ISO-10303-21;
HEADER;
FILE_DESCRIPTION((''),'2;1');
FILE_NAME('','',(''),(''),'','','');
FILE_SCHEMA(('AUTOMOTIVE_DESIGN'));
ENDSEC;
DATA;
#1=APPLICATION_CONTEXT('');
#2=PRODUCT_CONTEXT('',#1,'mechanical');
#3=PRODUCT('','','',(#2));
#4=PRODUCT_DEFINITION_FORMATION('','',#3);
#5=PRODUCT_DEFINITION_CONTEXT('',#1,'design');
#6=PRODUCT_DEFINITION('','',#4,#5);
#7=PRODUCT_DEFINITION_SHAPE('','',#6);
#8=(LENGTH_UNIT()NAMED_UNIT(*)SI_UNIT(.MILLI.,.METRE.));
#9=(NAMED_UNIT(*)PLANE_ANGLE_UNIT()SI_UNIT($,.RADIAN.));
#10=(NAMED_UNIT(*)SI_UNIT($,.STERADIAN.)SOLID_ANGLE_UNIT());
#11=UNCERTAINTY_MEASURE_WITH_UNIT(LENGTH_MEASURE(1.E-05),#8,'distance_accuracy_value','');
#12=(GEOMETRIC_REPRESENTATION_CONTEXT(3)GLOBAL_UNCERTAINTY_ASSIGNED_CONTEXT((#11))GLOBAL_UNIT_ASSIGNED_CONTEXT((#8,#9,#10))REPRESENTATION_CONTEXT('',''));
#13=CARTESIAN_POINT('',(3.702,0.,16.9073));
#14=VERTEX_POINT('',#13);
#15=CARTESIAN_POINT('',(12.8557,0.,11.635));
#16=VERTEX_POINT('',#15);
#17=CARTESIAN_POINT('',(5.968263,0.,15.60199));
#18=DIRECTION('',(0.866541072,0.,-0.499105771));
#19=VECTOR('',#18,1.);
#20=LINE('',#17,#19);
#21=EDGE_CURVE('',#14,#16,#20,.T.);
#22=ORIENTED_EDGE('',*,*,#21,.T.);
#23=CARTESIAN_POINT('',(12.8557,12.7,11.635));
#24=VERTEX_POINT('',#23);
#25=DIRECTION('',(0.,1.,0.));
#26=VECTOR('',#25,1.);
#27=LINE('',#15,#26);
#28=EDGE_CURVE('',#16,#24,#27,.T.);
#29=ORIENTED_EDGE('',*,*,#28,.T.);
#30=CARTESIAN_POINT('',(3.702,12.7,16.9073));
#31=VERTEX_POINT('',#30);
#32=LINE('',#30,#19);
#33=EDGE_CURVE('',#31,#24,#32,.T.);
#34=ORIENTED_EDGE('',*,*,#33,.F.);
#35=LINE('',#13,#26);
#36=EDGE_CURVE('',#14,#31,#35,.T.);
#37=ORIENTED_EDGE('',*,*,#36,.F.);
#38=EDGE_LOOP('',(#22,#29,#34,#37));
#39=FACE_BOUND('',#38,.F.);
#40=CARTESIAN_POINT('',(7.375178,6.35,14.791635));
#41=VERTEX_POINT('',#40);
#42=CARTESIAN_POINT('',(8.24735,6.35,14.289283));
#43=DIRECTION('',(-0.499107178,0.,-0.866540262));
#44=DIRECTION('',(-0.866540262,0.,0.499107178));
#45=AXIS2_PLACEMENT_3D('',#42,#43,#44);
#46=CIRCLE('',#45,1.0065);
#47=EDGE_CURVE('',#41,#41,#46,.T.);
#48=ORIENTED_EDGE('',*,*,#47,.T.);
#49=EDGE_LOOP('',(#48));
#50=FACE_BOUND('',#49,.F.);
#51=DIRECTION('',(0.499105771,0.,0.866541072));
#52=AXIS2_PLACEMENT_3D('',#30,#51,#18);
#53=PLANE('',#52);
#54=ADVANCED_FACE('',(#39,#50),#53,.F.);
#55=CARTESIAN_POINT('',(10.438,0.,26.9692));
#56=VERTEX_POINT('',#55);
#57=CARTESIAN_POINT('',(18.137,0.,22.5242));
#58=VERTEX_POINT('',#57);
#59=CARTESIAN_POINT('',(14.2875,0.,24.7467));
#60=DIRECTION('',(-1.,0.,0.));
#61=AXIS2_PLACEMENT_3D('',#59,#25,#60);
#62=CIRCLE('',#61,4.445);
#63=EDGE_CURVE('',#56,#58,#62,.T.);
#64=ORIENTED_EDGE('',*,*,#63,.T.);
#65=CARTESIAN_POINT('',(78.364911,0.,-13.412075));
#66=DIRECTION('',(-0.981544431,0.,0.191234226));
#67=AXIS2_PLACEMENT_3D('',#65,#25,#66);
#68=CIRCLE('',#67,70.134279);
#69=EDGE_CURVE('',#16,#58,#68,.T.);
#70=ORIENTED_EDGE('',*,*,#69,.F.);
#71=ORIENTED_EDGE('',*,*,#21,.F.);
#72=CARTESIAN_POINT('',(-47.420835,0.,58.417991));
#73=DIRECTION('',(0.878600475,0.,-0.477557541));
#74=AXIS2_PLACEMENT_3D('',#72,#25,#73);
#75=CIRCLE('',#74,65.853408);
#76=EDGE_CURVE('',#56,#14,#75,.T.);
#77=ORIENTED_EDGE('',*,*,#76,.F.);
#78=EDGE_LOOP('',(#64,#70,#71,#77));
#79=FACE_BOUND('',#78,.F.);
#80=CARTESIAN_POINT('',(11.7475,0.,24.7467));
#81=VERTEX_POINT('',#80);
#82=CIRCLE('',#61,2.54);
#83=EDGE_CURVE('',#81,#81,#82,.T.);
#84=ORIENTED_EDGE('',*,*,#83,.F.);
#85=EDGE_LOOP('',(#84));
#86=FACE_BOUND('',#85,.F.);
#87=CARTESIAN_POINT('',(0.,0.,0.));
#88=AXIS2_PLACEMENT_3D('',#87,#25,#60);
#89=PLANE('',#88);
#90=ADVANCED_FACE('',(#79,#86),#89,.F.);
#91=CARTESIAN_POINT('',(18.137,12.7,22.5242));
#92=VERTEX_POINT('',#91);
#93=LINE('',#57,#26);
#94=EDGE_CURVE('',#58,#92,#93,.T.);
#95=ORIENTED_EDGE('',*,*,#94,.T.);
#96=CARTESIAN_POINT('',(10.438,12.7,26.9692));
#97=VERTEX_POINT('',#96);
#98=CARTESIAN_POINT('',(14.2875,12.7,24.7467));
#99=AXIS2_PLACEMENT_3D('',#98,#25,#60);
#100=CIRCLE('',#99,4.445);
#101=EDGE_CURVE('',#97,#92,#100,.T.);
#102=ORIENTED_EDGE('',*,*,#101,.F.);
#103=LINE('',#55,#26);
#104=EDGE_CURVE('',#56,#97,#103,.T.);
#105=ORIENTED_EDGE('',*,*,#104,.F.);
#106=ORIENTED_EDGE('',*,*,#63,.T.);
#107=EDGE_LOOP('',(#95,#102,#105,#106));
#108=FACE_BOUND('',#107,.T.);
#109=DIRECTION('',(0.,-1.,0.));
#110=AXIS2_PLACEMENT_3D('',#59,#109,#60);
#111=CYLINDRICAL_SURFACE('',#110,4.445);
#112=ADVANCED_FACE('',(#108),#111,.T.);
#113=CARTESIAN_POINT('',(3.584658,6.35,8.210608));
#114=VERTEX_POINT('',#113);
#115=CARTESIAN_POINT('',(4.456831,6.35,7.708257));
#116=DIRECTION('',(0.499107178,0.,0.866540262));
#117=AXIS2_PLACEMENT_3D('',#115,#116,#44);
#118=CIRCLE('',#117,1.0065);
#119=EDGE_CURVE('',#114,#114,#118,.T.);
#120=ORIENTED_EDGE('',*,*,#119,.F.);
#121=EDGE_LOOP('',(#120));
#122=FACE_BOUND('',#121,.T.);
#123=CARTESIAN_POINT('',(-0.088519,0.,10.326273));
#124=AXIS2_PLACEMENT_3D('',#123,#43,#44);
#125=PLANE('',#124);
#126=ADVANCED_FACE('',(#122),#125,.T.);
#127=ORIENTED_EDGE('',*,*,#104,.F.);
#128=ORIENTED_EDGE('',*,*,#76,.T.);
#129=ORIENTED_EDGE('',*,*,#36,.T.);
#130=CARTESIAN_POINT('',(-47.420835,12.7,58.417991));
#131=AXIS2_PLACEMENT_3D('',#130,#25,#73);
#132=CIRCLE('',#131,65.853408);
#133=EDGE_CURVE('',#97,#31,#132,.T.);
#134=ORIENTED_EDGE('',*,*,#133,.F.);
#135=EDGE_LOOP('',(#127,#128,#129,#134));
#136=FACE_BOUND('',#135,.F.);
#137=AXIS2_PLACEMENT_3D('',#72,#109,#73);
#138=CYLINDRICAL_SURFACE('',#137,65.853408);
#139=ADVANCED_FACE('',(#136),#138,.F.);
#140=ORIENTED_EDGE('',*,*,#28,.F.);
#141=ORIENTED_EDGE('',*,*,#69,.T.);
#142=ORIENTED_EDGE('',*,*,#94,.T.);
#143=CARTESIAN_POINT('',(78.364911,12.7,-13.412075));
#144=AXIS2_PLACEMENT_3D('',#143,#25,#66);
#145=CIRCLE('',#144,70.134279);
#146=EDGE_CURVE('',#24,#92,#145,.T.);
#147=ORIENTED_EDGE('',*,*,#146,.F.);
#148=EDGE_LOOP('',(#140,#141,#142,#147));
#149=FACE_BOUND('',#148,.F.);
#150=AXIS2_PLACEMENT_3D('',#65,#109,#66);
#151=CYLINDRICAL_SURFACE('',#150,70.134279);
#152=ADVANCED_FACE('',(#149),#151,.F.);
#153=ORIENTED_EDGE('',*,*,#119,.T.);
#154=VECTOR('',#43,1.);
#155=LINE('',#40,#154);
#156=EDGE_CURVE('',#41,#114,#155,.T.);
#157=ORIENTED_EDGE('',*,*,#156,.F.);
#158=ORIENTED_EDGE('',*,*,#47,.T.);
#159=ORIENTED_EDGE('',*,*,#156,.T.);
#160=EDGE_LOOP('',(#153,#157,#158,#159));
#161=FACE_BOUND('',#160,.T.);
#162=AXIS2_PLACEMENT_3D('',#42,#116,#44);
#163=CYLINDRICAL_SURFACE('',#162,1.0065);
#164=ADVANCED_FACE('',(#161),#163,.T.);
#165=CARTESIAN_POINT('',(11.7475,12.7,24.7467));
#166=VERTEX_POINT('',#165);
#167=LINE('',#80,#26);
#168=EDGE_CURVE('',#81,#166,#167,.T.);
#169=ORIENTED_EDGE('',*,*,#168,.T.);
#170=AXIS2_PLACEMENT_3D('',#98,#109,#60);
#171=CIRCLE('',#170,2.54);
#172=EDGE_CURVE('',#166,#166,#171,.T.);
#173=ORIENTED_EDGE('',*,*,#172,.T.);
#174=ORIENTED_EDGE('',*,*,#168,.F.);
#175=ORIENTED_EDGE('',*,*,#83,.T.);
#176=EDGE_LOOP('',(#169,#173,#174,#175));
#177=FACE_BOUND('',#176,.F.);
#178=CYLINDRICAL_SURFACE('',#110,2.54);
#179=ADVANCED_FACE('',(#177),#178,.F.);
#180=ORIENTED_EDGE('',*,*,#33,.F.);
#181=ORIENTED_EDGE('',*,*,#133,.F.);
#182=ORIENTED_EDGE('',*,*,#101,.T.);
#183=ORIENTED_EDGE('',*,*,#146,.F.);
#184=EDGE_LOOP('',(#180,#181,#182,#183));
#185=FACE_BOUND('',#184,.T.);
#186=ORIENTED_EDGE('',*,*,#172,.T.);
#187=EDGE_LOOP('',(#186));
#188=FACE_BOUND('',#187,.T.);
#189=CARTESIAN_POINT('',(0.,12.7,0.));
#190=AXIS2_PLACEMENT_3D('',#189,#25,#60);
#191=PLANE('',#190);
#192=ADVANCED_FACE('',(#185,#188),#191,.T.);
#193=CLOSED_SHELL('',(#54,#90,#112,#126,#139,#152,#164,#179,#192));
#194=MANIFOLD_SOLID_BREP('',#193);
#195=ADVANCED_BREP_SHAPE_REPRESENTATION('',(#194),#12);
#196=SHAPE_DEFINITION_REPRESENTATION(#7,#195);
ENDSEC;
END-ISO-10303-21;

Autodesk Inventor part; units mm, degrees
ref_plane "YZ Plane" through (0, 0, 0) normal (1, 0, 0) x (0, 1, 0)
ref_plane "XZ Plane" through (0, 0, 0) normal (0, 1, 0) x (-1, 0, 0)
ref_plane "XY Plane" through (0, 0, 0) normal (0, 0, 1) x (1, 0, 0)
sketch "Sketch1" plane through (0, 0, 0) normal (0, 1, 0) x (-1, 0, 0)
  line L0 (0, 0) -> (28.575, 0)
  line L1 (28.575, 0) -> (0, 0)
  line L2 (0, 0) -> (-14.2875, -24.7467)
  line L3 (0, 0) -> (28.575, 0) construction
  line L4 (0, 0) -> (-14.2875, 24.7467)
  line L5 (0, 0) -> (28.575, 0) construction
  circle A0 centre (28.575, 0) radius 2.54
  circle A1 centre (-14.2875, -24.7467) radius 2.54
  circle A2 centre (-14.2875, 24.7467) radius 2.54
  circle A3 centre (0, 0) radius 3.175
  dimension "d0" = 28.575
  dimension "d1" = 28.575
  dimension "d2" = 120
  dimension "d3" = 28.575
  dimension "d4" = 120
  dimension "d5" = 5.08
  dimension "d6" = 5.08
  dimension "d7" = 5.08
  dimension "d9" = 6.35
sketch "Sketch2" plane through (0, 0, 0) normal (0, 1, 0) x (-1, 0, 0)
  circle A0 centre (28.575, 0) radius 2.54 projected
  circle A1 centre (-14.2875, -24.7467) radius 2.54 projected
  circle A2 centre (-14.2875, 24.7467) radius 2.54 projected
  circle A3 centre (28.575, 0) radius 4.445
  circle A4 centre (-14.2875, -24.7467) radius 4.445
  circle A5 centre (-14.2875, 24.7467) radius 4.445
  circle A6 centre (0, 0) radius 6.35
  circle A7 centre (0, 0) radius 9.525
  line L0 (28.575, 4.445) -> (28.575, -4.445)
  line L1 (-14.2875, 24.7467) -> (0, 0)
  line L2 (0, 0) -> (-14.2875, 24.7467)
  line L3 (-14.2875, 24.7467) -> (-10.438, 26.9692)
  line L4 (-14.2875, 24.7467) -> (-18.137, 22.5242)
  line L5 (0, 0) -> (-14.2875, -24.7467)
  line L6 (-10.438, -26.9692) -> (-14.2875, -24.7467)
  line L7 (-18.137, -22.5242) -> (-14.2875, -24.7467)
  arc A8 (4.7625, 8.2489) -> (28.575, 4.445) centre (26.9969, 71.0017) ccw
  arc A9 (28.575, -4.445) -> (4.7625, -8.2489) centre (26.881, -70.2762) ccw
  arc A10 (4.7625, -8.2489) -> (-10.438, -26.9692) centre (47.4204, -58.4177) ccw
  arc A11 (-18.137, -22.5242) -> (-9.525, 0) centre (-74.3014, 11.8584) ccw
  arc A12 (-9.525, 0) -> (-18.137, 22.5242) centre (-78.365, -13.4121) ccw
  arc A13 (-10.438, 26.9692) -> (4.7625, 8.2489) centre (47.4204, 58.4177) ccw
  arc A14 (-3.702, 16.9073) -> (16.4951, 5.2598) centre (24.8224, 43.0343) ccw
  arc A15 (16.4931, -5.2477) -> (-3.702, -16.9073) centre (24.8816, -43.0963) ccw
  line L8 (-9.525, 0) -> (-10.9982, 0)
  arc A16 (-12.7912, -11.6596) -> (-12.8557, 11.635) centre (-49.0728, -0.1126) ccw
  dimension "d10" = 8.89
  dimension "d11" = 8.89
  dimension "d12" = 8.89
  dimension "d13" = 12.7
  dimension "d14" = 19.05
  dimension "d15" = 1.4732
extrude "Extrusion1" add sketch "Sketch2" along normal blind 12.7 contours A0 L0 A3 | A0 L0 A9 A7 A8 | L6 A1 L5 A4 | A11 A7 L5 A4 | L4 A2 L1 A5 | A13 A7 L1 A5 | A8 A13 A14 | A15 A10 A9 | A7 L5 A6 L1 | A4 L7 A1 L6 | A10 A4 L5 A7 | L1 A6 L5 A7 | A5 L3 A2 L4 | A7 A12 A5 L1 | A5 L1 A2 L3 | L8 A16 A12 | A11 A16 L8 | L1 L5 A6 | A6 L5 L1 | L5 A1 L7 A4
hole "Hole1" at (0, 0, 0) direction (0, 1, 0) diameter 6.35 end through all
sketch "Sketch3" plane through (0, 12.7, 0) normal (0, 1, 0) x (1, 0, 0)
  circle A0 centre (0, 0) radius 3.175 projected
hole "Hole2" at (0, 12.7, 0) direction (0, -1, 0) diameter 6.604 end through all
sketch "Sketch4" plane through (0, 12.7, 0) normal (0, 1, 0) x (1, 0, 0)
  circle A0 centre (-10.3993, 5.2212) radius 3.175 projected
  circle A1 centre (-10.8149, -4.2948) radius 3.175 projected
  point P0 (0, 0)
hole "Hole3" at (-10.3993, 12.7, -5.2212) at (-10.8149, 12.7, 4.2948) direction (0, -1, 0) diameter 6.35 depth 162.56
sketch "Sketch5" plane through (0, 12.7, 0) normal (0, 1, 0) x (1, 0, 0)
  arc A0 (-16.4951, -5.2598) -> (-28.575, -4.445) centre (-26.9969, -71.0017) ccw projected
  arc A1 (-28.575, 4.445) -> (-16.4931, 5.2477) centre (-26.881, 70.2762) ccw projected
  line L0 (-16.4951, -5.2598) -> (-16.4931, 5.2477)
  arc A2 (10.438, -26.9692) -> (3.702, -16.9073) centre (-47.4204, -58.4177) ccw projected
  arc A3 (12.8557, -11.635) -> (18.137, -22.5242) centre (78.365, 13.4121) ccw projected
  line L1 (3.702, -16.9073) -> (12.8557, -11.635)
  arc A4 (18.137, 22.5242) -> (12.7912, 11.6596) centre (74.3014, -11.8584) ccw projected
  arc A5 (3.702, 16.9073) -> (10.438, 26.9692) centre (-47.4204, 58.4177) ccw projected
  line L2 (12.7912, 11.6596) -> (3.702, 16.9073)
  arc A6 (18.137, 22.5242) -> (10.438, 26.9692) centre (14.2875, 24.7467) ccw projected
  arc A7 (-28.575, 4.445) -> (-28.575, -4.445) centre (-28.575, 0) ccw projected
  point P0 (0, 0)
sketch "Sketch6" plane through (0, 12.7, 0) normal (0, 1, 0) x (1, 0, 0)
  arc A0 (-13.4646, 6.0485) -> (-8.668, 7.8826) centre (-10.3993, 5.2212) ccw projected
  line L0 (-10.3993, 5.2212) -> (-7.2243, 5.2212)
  line L1 (-10.3993, 5.2212) -> (-13.5743, 5.2212)
  line L2 (-13.5743, 5.2212) -> (-13.5743, 8.7596)
  line L3 (-13.5743, 8.7596) -> (-7.2855, 8.8652)
  line L4 (-7.2855, 8.8652) -> (-7.2243, 5.2212)
  arc A1 (-9.9167, -7.3401) -> (-13.4529, -6.0614) centre (-10.8149, -4.2948) ccw projected
  line L5 (-10.8149, -4.2948) -> (-13.9899, -4.2948)
  line L6 (-13.9899, -4.2948) -> (-13.9899, -9.3241)
  line L7 (-10.8149, -4.2948) -> (-7.6399, -4.2948)
  line L8 (-7.6399, -4.2948) -> (-7.6399, -9.0772)
  line L9 (-7.6399, -9.0772) -> (-13.9899, -9.3241)
  point P0 (0, 0)
extrude "Extrusion2" cut sketch "Sketch6" against normal blind 25.4 contours L2 L3 L4 L0 L1 | L8 L9 L6 L5 L7
sketch "Sketch7" plane through (0, 12.7, 0) normal (0, 1, 0) x (1, 0, 0)
  arc A0 (12.7912, 11.6596) -> (12.8557, -11.635) centre (49.0728, 0.1126) ccw projected
  arc A1 (12.7912, 11.6596) -> (12.8557, -11.635) centre (49.0728, 0.1126) ccw
  arc A2 (-7.2803, 8.5554) -> (3.702, 16.9073) centre (-24.8816, 43.0963) ccw projected
  arc A3 (-16.4931, 5.2477) -> (3.702, 16.9073) centre (-24.8816, 43.0963) ccw
  arc A4 (-13.9899, -5.9006) -> (-16.4951, -5.2598) centre (-24.8224, -43.0343) ccw projected
  arc A5 (3.702, -16.9073) -> (-16.4951, -5.2598) centre (-24.8224, -43.0343) ccw
  arc A6 (-28.575, 4.445) -> (-16.4931, 5.2477) centre (-26.881, 70.2762) ccw projected
  line L0 (-16.4931, 5.2477) -> (-16.4951, -5.2598)
  line L1 (3.702, -16.9073) -> (12.8557, -11.635)
  line L2 (3.702, 16.9073) -> (12.7912, 11.6596)
  point P0 (0, 0)
  point P1 (-7.2803, 8.5554)
  point P2 (-13.9899, -5.9006)
extrude "Extrusion3" cut sketch "Sketch7" against normal blind 25.4
extrude "Extrusion4" cut sketch "Sketch5" against normal blind 25.4
sketch "Sketch9" plane through (3.702, 0, 16.9073) normal (-0.4991072, 0, -0.8665403) x (-0.8665403, 0, 0.4991072)
  line L0 (0, 0) -> (0, 12.7) projected
  line L1 (0, 6.35) -> (-10.5635, 6.35)
  line L2 (-10.5635, 0) -> (-10.5635, 12.7) projected
  line L3 (-7.8001, 12.7) -> (-2.7201, 12.7) projected
  line L4 (-5.2601, 12.7) -> (-5.2307, 0)
  circle A0 centre (-5.2454, 6.35) radius 1.0065
  dimension "d45" = 2.013
extrude "Extrusion5" add sketch "Sketch9" along normal blind 7.5946
thread "Thread1" size "M2.5x0.45" class "6g" standard "ISO Metric profile" full length
properties part number "screw in stablity"
